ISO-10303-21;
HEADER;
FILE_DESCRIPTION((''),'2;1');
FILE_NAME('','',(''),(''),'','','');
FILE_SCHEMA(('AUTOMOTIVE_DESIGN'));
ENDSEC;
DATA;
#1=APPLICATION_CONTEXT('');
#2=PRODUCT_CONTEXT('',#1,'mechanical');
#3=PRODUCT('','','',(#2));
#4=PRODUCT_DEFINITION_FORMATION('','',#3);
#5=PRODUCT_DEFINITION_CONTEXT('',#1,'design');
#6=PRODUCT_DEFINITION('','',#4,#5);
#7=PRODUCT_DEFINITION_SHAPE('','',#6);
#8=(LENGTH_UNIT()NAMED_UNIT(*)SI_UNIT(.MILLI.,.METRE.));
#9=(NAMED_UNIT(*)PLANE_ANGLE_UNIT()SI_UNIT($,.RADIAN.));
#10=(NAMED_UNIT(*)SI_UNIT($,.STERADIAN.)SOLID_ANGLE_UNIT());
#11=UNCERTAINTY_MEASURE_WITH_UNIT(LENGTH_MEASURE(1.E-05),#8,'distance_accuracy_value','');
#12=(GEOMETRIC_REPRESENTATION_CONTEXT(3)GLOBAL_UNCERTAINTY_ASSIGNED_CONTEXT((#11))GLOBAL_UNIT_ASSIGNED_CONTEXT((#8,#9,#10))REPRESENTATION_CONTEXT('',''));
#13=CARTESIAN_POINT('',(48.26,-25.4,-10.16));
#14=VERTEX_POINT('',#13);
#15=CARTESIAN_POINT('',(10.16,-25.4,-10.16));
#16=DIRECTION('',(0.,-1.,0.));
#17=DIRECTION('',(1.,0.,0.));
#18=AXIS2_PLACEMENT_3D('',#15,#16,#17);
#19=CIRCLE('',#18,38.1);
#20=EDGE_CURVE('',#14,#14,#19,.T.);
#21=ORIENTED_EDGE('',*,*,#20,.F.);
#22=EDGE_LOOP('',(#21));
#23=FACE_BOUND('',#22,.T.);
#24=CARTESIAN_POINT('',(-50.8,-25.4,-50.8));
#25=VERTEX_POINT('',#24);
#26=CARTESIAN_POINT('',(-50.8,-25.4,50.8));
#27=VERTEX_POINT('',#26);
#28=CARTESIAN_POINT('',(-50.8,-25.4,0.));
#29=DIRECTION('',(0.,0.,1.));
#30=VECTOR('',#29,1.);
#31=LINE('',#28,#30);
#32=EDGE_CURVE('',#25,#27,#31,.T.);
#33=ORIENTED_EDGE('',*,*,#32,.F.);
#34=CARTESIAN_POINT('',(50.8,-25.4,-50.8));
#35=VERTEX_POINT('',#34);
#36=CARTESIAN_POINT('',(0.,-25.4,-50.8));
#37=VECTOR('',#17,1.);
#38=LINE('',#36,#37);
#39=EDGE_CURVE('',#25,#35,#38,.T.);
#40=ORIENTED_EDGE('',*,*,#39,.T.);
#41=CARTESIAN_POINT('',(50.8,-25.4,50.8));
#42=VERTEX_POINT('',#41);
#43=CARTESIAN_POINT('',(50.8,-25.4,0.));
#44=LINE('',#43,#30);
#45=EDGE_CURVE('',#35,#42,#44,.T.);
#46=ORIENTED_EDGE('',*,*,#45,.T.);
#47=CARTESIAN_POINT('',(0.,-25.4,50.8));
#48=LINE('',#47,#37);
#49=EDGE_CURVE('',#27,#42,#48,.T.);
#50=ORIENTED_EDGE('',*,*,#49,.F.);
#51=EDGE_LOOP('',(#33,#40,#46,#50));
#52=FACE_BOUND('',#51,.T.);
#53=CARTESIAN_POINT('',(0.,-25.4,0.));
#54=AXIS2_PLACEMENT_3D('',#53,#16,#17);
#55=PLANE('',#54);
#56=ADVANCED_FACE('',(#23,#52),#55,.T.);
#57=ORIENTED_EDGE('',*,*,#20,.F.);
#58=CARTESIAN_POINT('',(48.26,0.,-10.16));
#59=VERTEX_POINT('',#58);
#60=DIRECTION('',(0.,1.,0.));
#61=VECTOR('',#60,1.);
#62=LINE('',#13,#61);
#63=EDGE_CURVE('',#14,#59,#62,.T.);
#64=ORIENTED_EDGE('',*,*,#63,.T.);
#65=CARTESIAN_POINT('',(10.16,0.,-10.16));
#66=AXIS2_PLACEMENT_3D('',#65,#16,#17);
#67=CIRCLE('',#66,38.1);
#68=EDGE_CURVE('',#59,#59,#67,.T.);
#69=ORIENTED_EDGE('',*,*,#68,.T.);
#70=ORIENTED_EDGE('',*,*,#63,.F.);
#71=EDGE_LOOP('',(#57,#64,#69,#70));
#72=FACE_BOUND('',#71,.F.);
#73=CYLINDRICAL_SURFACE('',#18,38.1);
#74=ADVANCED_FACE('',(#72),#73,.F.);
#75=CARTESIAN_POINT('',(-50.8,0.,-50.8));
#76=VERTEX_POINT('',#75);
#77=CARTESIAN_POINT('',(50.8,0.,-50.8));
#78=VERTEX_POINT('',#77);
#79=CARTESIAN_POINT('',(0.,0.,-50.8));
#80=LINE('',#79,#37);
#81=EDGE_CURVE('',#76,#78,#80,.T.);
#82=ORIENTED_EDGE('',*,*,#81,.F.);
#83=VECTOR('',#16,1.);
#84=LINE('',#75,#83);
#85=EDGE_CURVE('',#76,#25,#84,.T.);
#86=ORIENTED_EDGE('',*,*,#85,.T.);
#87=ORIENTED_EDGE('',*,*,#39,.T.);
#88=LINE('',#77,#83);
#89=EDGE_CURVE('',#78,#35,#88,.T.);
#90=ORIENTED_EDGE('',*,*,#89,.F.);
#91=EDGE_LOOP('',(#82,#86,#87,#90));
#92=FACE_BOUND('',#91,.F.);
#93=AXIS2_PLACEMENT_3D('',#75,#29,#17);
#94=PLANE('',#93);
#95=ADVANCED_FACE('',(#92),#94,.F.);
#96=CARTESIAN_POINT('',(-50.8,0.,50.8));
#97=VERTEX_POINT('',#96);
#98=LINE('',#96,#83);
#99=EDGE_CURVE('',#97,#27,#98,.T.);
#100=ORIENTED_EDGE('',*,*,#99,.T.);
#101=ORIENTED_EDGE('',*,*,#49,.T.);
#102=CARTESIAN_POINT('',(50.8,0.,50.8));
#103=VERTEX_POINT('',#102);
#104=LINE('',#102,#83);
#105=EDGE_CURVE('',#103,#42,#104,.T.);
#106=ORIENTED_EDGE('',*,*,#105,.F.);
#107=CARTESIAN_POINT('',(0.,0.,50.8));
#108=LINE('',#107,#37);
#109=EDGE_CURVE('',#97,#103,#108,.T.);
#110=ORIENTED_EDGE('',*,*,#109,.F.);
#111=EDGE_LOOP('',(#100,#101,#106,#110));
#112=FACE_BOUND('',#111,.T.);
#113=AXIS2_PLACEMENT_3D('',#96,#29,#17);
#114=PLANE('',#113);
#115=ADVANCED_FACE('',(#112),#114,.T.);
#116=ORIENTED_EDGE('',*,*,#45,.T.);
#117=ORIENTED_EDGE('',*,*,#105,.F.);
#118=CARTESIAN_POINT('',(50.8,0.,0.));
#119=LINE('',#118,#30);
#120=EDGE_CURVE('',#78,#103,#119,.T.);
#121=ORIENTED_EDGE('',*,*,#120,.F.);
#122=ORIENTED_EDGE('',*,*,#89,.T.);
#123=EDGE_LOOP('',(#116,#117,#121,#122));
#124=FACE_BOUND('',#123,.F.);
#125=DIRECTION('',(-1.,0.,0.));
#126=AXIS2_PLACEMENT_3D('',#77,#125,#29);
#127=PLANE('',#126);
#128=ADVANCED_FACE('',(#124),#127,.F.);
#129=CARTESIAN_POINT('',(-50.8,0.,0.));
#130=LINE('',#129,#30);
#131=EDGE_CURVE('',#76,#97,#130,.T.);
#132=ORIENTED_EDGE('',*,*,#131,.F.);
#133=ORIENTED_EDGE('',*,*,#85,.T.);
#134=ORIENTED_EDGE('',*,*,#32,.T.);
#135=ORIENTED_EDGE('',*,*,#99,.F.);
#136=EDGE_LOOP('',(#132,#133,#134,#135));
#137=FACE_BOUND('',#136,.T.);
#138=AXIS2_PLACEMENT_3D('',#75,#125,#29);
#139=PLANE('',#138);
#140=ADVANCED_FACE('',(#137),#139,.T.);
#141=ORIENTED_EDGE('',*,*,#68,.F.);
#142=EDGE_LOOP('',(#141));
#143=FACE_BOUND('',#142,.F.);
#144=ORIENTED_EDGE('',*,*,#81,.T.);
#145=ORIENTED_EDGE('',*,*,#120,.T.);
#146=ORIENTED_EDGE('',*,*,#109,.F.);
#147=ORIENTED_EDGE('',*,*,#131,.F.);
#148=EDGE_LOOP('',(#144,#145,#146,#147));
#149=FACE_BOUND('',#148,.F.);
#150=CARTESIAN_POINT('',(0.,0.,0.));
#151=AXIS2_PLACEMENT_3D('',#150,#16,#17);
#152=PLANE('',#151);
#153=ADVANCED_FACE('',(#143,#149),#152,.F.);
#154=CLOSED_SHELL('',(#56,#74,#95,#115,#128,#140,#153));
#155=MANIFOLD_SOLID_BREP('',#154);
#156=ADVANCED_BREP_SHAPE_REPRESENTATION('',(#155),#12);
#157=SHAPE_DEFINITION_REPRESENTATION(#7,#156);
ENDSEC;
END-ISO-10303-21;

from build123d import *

# Parameters (mm, degrees)
F0_W     = 101.6
F0_H     = 101.6
F1_DEPTH = 25.4
F2_R     = 38.1
F3_DEPTH = 25.4


# Not quite as in the source:
# - a feature names something its author has since deleted; it is built from what else it names


with BuildPart() as f1:
    # F0 (on Front) → F1 (new body)
    with BuildSketch(Plane.XZ):
        Rectangle(F0_W, F0_H)
    extrude(amount=F1_DEPTH)

    # F2 (on face) → F3 (cut)
    with BuildSketch(Plane.XZ.offset(25.4)):
        with Locations((10.16, -10.16)):
            Circle(F2_R)
    extrude(amount=-F3_DEPTH, mode=Mode.SUBTRACT)


solid = f1.part
